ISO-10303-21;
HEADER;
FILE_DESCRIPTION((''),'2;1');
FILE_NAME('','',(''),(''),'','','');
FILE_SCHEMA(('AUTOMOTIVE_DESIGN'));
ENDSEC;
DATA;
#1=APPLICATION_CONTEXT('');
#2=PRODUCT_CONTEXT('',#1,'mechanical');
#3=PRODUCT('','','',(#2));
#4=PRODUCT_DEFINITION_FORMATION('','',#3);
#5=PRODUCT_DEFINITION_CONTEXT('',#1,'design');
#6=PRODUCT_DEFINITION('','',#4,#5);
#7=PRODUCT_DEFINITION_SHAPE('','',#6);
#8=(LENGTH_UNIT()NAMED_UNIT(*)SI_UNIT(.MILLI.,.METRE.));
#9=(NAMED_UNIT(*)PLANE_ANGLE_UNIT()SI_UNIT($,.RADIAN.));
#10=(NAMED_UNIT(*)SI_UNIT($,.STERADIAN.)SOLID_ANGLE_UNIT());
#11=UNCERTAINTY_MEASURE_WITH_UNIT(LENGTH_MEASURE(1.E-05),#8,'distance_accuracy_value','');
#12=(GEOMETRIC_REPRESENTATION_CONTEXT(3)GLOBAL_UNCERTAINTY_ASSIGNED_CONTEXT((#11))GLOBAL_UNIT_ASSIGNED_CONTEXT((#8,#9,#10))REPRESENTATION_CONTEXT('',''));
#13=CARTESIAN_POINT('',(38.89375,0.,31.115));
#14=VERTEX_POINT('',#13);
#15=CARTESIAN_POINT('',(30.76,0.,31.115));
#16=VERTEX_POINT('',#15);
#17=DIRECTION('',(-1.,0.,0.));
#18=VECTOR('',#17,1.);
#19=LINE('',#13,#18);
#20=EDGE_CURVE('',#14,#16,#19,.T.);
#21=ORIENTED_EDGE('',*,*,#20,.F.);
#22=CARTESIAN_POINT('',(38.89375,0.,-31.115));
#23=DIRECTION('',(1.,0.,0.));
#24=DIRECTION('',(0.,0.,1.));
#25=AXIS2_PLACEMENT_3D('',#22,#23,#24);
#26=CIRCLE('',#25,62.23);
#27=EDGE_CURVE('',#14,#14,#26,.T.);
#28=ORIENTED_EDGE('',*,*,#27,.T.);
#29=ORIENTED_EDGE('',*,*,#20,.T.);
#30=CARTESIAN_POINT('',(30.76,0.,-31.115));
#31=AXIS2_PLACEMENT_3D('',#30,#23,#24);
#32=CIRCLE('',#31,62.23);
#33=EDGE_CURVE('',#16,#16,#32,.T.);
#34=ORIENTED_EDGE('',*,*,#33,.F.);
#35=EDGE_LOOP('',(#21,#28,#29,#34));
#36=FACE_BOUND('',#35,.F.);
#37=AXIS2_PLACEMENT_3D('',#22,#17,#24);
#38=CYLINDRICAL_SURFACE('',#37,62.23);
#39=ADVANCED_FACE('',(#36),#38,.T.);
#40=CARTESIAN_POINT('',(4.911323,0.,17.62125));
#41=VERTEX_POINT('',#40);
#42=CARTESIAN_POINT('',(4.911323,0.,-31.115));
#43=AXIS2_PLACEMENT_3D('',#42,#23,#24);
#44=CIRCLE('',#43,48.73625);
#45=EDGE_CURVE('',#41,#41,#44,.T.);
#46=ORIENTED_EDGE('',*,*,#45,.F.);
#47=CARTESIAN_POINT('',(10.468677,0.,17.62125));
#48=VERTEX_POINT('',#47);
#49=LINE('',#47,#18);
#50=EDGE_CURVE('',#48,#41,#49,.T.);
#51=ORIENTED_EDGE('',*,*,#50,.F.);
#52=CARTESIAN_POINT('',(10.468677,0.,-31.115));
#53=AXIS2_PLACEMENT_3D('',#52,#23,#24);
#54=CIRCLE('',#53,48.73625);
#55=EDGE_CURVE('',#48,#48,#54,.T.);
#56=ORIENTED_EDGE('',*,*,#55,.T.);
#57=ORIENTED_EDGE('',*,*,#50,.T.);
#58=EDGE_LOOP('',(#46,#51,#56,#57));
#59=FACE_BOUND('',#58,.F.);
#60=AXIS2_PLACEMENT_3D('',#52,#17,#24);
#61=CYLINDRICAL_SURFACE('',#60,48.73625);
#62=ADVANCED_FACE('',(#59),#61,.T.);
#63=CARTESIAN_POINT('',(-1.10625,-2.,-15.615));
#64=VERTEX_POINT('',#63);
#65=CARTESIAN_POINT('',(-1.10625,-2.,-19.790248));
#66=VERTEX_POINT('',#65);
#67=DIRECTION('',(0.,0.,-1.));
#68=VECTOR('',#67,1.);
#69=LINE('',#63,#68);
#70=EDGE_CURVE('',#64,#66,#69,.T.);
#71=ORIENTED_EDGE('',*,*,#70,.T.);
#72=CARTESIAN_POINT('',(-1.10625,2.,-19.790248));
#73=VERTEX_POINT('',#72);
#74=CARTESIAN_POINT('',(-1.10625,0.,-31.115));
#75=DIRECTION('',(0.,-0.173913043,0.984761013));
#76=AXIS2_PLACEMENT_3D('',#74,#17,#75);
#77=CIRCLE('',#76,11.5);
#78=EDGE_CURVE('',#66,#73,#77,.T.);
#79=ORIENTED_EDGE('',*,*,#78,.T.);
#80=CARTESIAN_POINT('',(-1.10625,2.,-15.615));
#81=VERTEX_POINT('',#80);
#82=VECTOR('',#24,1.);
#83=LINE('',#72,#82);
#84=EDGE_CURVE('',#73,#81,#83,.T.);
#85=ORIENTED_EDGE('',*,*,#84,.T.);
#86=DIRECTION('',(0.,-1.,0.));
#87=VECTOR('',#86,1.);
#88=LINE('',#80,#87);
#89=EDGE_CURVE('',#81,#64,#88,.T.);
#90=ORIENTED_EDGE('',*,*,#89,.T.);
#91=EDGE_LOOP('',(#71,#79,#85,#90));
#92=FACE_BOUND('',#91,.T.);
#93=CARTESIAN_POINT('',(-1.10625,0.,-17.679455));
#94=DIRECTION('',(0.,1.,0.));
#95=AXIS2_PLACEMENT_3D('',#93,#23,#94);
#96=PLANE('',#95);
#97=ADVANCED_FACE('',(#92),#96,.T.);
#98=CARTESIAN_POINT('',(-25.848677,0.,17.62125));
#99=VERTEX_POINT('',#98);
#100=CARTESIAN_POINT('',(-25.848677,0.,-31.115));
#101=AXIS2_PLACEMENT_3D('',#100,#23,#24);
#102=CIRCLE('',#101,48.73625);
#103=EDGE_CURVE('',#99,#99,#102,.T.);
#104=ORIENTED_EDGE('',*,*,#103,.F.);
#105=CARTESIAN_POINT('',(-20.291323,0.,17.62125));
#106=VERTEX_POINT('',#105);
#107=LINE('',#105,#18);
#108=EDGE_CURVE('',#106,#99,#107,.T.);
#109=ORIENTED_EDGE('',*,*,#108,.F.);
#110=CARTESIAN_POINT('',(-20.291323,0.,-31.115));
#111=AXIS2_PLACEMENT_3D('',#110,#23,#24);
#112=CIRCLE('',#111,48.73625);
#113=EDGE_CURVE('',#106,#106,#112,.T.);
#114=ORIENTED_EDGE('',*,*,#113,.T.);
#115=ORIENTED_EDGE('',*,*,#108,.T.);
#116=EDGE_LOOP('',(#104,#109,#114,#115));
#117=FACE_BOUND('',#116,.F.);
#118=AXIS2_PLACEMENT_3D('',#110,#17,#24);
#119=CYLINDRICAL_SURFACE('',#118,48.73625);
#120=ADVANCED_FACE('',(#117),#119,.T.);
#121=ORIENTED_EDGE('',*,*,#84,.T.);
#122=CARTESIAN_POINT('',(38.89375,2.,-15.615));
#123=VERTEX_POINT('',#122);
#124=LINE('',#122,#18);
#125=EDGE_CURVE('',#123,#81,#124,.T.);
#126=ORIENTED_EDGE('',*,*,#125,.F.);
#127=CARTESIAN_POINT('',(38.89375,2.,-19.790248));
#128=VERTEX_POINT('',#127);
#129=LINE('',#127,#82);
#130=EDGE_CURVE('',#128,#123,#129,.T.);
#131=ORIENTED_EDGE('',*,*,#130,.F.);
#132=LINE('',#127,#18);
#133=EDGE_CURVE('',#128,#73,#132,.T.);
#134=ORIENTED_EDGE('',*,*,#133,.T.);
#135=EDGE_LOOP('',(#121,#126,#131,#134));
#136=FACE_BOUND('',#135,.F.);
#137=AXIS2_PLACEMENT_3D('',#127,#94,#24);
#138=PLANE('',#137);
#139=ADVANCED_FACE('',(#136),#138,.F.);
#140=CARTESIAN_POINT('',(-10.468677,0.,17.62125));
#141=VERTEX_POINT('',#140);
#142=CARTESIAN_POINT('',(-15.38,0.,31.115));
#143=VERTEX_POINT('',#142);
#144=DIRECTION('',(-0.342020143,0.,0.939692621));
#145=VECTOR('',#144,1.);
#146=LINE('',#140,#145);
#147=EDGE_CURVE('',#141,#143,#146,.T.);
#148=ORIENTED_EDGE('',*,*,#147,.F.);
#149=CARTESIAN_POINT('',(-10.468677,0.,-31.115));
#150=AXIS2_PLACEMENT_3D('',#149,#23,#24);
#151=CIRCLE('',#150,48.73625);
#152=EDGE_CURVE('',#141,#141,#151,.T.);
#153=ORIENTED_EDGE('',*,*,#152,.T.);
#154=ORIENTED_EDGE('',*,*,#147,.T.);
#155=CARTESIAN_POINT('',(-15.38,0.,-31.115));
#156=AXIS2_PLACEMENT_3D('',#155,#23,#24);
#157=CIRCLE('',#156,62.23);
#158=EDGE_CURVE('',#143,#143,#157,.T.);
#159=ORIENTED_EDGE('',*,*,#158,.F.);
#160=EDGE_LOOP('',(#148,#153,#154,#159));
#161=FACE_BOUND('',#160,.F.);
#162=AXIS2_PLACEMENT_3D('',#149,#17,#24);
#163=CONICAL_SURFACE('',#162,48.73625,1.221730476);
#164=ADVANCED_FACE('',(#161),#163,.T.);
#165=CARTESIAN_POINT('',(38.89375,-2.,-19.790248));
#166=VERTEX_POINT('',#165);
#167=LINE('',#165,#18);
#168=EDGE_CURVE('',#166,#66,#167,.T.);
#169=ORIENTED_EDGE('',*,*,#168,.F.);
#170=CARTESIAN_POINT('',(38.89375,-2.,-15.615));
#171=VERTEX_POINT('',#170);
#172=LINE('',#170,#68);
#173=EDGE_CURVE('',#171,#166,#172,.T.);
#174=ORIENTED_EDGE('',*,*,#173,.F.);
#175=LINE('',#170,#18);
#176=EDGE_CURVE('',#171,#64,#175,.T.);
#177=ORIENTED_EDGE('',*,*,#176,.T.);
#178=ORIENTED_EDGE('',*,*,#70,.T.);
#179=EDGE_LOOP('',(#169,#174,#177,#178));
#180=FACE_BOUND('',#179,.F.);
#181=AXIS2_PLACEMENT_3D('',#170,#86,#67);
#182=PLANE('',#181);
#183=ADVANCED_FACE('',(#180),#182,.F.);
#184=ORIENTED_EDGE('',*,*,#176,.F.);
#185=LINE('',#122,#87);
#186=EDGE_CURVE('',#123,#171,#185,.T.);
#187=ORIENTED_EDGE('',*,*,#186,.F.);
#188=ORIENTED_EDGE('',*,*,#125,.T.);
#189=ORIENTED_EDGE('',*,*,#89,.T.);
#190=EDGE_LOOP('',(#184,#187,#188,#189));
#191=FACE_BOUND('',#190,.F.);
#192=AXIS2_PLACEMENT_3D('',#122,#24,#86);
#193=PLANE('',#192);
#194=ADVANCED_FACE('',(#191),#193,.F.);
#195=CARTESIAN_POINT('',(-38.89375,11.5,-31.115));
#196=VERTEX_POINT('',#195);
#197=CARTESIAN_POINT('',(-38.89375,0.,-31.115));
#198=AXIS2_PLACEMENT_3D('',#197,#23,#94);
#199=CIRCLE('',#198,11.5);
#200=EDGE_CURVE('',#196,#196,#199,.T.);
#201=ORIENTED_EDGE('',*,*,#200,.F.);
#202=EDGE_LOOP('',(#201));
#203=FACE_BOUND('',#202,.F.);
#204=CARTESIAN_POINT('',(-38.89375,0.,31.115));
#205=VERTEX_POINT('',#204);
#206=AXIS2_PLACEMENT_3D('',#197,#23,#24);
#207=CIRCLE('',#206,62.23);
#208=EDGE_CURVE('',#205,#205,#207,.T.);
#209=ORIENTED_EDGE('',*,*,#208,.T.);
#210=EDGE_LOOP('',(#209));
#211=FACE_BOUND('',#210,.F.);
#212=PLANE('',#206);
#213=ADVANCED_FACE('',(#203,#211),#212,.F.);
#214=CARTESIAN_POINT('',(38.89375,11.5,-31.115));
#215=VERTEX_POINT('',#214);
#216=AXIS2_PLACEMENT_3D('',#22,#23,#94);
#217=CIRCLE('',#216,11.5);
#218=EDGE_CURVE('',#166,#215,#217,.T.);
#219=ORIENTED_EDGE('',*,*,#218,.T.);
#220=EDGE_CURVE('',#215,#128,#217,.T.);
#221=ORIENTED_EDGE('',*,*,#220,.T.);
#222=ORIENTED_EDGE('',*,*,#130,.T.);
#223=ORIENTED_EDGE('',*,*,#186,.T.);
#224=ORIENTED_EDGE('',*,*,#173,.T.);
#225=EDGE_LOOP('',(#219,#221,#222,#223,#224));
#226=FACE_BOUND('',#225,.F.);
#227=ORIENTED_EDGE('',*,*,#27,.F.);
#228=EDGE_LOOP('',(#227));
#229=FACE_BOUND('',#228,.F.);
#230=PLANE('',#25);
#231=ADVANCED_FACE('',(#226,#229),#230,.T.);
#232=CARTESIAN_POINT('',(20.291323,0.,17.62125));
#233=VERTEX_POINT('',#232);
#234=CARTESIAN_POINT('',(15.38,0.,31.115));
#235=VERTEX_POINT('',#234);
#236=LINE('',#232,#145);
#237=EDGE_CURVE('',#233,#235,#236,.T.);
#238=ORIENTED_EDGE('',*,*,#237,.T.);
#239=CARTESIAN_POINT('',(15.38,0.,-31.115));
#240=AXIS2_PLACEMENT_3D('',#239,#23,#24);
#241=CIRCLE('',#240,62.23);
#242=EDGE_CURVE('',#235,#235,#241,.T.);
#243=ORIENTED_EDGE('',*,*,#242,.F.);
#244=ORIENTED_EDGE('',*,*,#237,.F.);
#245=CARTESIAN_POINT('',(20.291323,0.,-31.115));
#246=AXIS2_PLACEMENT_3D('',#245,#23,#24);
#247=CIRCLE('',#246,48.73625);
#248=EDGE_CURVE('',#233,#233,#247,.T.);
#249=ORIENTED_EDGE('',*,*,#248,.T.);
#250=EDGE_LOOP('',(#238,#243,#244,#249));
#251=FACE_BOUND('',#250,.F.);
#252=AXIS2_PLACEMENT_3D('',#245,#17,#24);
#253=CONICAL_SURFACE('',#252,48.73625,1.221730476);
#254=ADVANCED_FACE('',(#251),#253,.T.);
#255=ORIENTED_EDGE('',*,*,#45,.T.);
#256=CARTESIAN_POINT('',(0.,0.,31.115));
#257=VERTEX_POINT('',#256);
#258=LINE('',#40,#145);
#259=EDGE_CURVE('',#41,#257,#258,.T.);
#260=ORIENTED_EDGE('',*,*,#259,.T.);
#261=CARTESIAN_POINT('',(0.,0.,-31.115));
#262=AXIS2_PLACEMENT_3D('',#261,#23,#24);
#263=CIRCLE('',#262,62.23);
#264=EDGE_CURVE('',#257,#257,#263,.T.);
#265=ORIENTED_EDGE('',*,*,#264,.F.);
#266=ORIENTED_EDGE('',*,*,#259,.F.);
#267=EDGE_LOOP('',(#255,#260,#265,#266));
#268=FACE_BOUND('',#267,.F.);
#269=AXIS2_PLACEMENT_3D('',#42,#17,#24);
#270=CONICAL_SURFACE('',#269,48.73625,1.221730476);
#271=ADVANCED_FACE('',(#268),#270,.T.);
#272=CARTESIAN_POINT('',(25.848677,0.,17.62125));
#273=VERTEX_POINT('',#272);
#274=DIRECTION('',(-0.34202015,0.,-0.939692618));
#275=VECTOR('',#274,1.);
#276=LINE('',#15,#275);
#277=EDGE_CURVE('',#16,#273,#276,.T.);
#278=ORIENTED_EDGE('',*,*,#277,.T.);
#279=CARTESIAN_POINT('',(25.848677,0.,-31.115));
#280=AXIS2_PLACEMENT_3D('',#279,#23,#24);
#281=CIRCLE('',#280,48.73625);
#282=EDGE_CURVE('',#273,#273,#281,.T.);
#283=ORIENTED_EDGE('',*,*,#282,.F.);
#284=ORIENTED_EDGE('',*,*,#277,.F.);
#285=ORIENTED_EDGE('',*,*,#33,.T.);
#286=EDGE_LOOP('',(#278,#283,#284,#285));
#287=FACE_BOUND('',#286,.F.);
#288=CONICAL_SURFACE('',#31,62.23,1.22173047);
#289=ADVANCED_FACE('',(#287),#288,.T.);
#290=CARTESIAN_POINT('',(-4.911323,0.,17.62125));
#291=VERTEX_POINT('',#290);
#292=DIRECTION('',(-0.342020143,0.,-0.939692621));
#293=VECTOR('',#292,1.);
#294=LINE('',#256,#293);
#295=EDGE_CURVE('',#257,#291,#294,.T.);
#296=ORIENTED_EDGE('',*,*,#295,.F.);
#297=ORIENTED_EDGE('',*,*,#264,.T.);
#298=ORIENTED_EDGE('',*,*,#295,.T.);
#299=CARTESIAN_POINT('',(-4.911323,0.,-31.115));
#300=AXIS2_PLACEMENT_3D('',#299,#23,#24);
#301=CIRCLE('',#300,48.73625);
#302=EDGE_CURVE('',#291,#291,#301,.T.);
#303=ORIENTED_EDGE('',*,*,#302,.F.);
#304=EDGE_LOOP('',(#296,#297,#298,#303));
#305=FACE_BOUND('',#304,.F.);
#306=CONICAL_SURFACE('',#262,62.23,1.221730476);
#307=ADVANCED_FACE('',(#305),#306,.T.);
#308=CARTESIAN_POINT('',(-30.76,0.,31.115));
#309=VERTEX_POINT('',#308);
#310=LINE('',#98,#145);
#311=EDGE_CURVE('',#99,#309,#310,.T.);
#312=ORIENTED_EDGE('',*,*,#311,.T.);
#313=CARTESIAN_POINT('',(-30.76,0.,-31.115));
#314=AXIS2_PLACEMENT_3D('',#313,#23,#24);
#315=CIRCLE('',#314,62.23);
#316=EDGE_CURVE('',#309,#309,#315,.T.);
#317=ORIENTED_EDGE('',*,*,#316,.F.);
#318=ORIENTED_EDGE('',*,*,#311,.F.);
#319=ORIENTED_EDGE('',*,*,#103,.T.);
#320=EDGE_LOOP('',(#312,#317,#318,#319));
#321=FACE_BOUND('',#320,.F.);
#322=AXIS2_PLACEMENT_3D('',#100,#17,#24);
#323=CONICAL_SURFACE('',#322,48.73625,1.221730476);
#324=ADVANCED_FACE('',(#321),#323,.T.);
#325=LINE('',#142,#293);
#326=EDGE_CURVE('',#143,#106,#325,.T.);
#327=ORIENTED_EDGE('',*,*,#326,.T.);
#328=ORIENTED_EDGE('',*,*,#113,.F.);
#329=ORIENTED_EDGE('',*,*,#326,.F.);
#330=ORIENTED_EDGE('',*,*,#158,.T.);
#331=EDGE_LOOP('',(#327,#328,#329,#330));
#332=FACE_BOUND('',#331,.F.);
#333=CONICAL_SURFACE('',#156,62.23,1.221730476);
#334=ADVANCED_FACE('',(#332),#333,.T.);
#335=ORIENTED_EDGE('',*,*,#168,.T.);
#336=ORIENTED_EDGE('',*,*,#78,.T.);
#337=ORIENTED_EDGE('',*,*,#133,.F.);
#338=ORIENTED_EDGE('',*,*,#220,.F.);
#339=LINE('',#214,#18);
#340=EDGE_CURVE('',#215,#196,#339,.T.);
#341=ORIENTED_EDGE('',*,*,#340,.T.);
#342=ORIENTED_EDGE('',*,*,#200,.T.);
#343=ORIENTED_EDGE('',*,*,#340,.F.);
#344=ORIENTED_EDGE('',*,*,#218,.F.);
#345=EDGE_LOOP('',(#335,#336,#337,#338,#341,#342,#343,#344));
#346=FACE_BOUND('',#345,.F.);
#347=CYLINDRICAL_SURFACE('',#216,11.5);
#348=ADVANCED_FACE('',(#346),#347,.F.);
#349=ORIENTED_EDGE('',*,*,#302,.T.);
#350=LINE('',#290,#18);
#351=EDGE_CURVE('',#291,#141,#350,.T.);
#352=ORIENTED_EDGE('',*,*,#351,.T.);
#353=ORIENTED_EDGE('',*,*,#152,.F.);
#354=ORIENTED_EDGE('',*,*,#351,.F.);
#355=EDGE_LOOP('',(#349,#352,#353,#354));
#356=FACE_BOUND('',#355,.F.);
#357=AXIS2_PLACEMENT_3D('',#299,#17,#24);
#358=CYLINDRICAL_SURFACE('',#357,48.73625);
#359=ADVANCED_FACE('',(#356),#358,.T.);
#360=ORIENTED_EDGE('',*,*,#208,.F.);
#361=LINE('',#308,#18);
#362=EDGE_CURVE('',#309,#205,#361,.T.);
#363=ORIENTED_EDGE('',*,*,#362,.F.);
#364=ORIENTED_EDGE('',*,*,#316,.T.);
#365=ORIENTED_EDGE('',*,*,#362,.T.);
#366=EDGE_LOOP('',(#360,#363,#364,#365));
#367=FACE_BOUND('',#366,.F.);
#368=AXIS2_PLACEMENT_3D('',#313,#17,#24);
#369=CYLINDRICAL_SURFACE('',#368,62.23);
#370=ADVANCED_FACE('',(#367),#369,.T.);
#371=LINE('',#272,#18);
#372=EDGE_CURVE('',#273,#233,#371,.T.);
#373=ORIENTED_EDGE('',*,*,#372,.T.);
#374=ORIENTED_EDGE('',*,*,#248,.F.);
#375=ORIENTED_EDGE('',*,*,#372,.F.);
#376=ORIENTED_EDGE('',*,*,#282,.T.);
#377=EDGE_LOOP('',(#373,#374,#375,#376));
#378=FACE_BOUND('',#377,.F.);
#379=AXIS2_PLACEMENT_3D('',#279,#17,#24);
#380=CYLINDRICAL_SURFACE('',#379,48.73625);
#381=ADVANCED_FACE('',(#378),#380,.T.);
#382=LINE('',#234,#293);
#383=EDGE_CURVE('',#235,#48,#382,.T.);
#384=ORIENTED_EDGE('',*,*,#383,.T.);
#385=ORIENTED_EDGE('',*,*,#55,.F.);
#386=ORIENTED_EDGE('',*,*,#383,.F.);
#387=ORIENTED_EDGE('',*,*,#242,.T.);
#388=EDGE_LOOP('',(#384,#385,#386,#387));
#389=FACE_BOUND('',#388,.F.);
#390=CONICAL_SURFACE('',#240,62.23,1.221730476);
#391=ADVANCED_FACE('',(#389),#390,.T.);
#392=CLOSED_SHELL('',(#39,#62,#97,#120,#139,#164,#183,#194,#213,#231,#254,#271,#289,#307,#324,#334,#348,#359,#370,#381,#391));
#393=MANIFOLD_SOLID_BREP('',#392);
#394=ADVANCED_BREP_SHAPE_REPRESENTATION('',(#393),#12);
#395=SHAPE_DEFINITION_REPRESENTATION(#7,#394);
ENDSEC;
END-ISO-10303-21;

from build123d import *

# Parameters (mm, degrees)
F2_R     = 11.5
F3_DEPTH = 80.518
F5_DEPTH = 40


# Not quite as in the source:
# - ends of sketch curves that miss each other by under 0.0002 mm in the source are joined


with BuildPart() as f1:
    # F0 (on Front) → F1 (revolve)
    with BuildSketch(Plane.XZ):
        Polygon((-30.76, 31.115), (-38.89375, 31.115), (-38.89375, -31.115), (-30.76, -31.115), (30.76, -31.115), (38.89375, -31.115), (38.89375, 31.115), (30.76, 31.115), (25.8486765474, 17.62125), (20.2913232706, 17.62125), (15.379999922, 31.115), (10.4686765734, 17.62125), (4.9113232966, 17.62125), (-5.2e-08, 31.115), (-4.9113234006, 17.62125), (-10.4686766774, 17.62125), (-15.380000026, 31.115), (-20.2913233746, 17.62125), (-25.8486766514, 17.62125), align=None)
    revolve(axis=Axis((0, 0, -31.115), (1, 0, 0)))

    # F2 (on face) → F3 (cut)
    with BuildSketch(Plane.YZ.offset(38.89375)):
        with Locations((0, -31.115)):
            Circle(F2_R)
    extrude(amount=-F3_DEPTH, mode=Mode.SUBTRACT)

    # F4 (on face) → F5 (cut)
    with BuildSketch(Plane.YZ.offset(38.89375)):
        with BuildLine():
            Line((2, -15.615), (0, -15.615))
            Line((0, -15.615), (-2, -15.615))
            Line((-2, -15.615), (-2, -19.7902483471))
            ThreePointArc((-2, -19.7902483471), (0, -19.615), (2, -19.7902483471))
            Line((2, -19.7902483471), (2, -15.615))
        make_face()
    extrude(amount=-F5_DEPTH, mode=Mode.SUBTRACT)


solid = f1.part
